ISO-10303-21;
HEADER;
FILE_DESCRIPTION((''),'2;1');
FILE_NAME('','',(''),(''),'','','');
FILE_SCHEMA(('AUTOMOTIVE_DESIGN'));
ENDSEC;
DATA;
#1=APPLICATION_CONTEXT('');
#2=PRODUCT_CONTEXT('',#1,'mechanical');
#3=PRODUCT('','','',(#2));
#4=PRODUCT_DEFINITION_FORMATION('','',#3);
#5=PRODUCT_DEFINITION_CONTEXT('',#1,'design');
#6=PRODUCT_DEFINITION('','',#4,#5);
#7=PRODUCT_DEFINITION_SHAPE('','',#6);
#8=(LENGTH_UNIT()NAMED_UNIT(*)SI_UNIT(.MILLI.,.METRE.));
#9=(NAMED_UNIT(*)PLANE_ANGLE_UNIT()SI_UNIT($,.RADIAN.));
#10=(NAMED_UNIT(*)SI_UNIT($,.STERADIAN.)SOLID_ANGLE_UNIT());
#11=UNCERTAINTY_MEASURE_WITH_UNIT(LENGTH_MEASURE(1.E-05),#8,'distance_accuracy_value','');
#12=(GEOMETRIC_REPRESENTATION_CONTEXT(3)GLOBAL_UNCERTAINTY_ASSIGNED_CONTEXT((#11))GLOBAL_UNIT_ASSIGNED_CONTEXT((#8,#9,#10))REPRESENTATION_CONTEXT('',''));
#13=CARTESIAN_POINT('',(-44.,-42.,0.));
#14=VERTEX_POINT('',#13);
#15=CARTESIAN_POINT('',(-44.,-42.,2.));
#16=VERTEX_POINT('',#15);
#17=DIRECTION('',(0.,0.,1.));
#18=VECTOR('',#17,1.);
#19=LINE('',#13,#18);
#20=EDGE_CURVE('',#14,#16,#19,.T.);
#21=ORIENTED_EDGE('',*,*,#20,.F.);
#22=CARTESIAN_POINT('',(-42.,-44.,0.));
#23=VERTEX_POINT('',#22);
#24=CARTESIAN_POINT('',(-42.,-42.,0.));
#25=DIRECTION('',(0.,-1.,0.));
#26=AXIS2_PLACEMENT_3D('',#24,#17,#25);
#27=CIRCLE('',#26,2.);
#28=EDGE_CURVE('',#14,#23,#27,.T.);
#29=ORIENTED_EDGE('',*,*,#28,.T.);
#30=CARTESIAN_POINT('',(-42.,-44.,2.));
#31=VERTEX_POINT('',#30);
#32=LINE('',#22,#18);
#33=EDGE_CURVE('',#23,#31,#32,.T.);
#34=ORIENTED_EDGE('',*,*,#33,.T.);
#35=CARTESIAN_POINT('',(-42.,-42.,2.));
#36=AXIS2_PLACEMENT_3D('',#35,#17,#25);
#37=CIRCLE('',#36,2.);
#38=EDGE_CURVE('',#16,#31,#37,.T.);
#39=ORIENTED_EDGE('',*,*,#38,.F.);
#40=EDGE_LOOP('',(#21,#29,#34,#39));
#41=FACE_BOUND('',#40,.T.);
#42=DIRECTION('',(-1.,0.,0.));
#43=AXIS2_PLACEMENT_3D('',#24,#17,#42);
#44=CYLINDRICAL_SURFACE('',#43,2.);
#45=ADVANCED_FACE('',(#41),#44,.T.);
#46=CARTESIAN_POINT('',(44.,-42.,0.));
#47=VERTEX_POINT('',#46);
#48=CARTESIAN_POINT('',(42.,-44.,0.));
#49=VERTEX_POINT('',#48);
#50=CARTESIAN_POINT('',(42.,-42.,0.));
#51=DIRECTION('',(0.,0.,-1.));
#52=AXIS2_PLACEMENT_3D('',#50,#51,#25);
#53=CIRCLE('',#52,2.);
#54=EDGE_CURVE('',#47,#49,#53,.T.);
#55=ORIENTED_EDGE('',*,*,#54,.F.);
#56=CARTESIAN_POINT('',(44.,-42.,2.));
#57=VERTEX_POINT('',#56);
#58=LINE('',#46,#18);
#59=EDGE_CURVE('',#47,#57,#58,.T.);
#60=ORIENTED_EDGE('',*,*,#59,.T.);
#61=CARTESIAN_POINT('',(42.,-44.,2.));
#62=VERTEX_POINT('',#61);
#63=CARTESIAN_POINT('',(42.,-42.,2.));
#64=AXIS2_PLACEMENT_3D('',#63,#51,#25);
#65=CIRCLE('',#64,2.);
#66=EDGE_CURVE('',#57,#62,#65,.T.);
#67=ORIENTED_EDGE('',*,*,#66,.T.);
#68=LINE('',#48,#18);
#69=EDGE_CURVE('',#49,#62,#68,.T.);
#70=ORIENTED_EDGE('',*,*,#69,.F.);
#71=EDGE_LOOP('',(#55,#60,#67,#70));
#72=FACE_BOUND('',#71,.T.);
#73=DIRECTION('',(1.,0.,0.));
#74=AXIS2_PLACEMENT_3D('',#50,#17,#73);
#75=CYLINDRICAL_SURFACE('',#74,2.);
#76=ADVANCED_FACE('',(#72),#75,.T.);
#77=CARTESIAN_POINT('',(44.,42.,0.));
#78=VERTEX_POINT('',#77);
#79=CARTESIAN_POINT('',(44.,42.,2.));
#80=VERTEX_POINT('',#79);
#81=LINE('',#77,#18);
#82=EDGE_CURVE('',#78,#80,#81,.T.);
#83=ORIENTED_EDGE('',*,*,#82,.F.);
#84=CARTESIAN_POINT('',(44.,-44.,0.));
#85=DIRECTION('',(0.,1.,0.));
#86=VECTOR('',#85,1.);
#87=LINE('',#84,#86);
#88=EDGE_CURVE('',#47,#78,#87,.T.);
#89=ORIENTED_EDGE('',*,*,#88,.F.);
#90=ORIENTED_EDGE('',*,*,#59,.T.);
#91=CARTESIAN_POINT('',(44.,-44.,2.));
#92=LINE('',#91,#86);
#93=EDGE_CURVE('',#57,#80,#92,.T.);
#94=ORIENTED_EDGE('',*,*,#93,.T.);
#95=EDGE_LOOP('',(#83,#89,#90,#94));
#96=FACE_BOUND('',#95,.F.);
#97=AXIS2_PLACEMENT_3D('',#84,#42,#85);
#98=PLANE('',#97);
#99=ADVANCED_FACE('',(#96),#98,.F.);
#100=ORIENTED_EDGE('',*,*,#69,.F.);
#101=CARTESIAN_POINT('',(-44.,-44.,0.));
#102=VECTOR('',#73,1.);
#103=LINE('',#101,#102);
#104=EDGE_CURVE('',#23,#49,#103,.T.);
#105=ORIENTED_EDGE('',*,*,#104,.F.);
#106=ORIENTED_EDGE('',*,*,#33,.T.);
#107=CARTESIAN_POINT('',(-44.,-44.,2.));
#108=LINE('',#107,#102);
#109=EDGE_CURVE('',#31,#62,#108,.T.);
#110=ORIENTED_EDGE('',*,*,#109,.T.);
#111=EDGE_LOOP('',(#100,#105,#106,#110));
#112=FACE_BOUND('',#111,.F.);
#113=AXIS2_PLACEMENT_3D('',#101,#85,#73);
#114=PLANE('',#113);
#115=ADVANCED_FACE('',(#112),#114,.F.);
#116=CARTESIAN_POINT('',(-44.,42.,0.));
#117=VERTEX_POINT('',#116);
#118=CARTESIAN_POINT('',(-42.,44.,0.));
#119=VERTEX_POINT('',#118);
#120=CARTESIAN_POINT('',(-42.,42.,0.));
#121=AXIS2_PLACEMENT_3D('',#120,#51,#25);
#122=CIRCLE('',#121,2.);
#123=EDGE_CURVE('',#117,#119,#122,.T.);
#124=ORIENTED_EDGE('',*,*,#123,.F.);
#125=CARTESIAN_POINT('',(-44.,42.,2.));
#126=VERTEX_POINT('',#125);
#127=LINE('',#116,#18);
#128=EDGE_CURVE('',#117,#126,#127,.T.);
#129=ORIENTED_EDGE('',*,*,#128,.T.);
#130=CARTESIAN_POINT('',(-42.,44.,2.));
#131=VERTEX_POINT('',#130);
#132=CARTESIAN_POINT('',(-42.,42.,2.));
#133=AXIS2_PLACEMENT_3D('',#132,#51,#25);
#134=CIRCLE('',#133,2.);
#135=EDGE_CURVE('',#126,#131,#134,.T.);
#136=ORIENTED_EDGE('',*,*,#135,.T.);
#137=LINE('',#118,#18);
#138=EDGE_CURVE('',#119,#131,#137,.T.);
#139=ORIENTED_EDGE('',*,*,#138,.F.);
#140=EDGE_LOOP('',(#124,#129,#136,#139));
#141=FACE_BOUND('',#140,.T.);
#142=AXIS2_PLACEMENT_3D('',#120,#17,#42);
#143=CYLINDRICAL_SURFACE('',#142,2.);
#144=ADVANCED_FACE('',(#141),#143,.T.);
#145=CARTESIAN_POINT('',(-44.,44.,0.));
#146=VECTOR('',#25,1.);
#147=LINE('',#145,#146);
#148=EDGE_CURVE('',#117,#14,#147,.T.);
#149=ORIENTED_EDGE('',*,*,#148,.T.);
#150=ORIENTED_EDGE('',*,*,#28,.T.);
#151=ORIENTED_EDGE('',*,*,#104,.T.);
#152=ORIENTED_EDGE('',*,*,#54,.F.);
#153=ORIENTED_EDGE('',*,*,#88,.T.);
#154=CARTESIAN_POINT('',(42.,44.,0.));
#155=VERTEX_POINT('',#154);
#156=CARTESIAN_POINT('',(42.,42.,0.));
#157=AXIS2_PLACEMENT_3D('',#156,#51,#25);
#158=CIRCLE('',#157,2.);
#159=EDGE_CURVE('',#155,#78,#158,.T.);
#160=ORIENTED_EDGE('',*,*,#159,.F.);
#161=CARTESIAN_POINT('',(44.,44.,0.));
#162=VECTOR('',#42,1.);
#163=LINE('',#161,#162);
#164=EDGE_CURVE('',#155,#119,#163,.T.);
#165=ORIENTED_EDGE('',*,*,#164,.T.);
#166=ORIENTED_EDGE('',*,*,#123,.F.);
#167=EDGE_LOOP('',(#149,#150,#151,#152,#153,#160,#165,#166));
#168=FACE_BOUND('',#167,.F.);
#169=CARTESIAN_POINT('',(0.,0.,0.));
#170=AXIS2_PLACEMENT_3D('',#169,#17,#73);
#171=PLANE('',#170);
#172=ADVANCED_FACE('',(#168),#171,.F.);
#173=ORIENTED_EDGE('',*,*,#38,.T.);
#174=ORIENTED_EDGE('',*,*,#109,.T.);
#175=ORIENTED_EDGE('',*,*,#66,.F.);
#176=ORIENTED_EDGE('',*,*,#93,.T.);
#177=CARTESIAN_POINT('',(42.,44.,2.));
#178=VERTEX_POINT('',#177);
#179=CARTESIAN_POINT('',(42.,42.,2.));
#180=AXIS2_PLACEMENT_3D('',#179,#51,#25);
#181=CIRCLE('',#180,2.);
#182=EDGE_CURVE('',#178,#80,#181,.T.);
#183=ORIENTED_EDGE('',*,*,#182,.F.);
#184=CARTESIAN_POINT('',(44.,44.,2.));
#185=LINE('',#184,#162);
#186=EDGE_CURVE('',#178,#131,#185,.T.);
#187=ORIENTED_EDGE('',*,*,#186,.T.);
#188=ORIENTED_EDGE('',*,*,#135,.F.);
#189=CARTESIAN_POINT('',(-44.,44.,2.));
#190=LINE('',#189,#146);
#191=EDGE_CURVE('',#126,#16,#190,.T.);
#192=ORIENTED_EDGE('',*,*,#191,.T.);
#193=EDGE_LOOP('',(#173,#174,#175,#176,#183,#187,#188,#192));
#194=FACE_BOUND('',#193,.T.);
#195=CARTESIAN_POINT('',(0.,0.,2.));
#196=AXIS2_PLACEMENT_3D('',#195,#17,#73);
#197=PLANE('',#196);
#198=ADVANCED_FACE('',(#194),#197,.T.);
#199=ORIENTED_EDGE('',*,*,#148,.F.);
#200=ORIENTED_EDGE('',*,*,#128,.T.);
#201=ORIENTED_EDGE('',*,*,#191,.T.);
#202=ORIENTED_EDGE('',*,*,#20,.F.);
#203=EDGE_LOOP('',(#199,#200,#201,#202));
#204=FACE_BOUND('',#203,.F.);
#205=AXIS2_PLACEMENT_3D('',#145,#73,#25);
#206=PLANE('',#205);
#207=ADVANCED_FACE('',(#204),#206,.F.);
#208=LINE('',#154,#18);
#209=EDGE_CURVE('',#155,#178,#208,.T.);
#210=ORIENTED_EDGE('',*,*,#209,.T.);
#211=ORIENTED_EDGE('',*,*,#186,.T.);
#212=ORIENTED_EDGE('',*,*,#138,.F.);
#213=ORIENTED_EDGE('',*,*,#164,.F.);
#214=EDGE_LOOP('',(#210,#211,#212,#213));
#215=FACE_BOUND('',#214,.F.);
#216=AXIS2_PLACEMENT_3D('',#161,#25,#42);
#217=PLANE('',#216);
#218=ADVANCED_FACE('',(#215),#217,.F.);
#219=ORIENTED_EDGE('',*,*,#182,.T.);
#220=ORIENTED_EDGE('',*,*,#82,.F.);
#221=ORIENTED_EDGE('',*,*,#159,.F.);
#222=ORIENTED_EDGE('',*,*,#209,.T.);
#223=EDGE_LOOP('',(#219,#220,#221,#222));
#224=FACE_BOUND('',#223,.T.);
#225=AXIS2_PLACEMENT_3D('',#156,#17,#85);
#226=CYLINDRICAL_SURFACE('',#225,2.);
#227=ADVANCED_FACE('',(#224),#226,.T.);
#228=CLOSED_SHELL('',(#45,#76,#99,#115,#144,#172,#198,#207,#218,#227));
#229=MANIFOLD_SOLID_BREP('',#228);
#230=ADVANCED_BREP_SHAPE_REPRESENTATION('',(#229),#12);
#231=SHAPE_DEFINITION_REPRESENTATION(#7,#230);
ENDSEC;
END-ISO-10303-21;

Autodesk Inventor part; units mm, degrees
ref_plane "YZ Plane" through (0, 0, 0) normal (1, 0, 0) x (0, 1, 0)
ref_plane "XZ Plane" through (0, 0, 0) normal (0, 1, 0) x (-1, 0, 0)
ref_plane "XY Plane" through (0, 0, 0) normal (0, 0, 1) x (1, 0, 0)
sketch "Sketch1" plane through (0, 0, 0) normal (0, 0, 1) x (1, 0, 0)
  line L0 (-44, -44) -> (44, -44)
  line L1 (44, -44) -> (44, 44)
  line L2 (44, 44) -> (-44, 44)
  line L3 (-44, 44) -> (-44, -44)
  line L4 (-44, -44) -> (44, 44) construction
  line L5 (44, -44) -> (-44, 44) construction
  point P0 (0, 0)
  dimension "d154" = 88
  dimension "d155" = 88
extrude "Plate5" add sketch "Sketch1" along normal blind 2
fillet "Corner Round1" radius 2 4 edges at (44, 44, 1) (-44, 44, 1) (-44, -44, 1) (44, -44, 1)
properties part number "PRS 1665 DrSysB CUP 1_1200" material "Stainless Steel"
